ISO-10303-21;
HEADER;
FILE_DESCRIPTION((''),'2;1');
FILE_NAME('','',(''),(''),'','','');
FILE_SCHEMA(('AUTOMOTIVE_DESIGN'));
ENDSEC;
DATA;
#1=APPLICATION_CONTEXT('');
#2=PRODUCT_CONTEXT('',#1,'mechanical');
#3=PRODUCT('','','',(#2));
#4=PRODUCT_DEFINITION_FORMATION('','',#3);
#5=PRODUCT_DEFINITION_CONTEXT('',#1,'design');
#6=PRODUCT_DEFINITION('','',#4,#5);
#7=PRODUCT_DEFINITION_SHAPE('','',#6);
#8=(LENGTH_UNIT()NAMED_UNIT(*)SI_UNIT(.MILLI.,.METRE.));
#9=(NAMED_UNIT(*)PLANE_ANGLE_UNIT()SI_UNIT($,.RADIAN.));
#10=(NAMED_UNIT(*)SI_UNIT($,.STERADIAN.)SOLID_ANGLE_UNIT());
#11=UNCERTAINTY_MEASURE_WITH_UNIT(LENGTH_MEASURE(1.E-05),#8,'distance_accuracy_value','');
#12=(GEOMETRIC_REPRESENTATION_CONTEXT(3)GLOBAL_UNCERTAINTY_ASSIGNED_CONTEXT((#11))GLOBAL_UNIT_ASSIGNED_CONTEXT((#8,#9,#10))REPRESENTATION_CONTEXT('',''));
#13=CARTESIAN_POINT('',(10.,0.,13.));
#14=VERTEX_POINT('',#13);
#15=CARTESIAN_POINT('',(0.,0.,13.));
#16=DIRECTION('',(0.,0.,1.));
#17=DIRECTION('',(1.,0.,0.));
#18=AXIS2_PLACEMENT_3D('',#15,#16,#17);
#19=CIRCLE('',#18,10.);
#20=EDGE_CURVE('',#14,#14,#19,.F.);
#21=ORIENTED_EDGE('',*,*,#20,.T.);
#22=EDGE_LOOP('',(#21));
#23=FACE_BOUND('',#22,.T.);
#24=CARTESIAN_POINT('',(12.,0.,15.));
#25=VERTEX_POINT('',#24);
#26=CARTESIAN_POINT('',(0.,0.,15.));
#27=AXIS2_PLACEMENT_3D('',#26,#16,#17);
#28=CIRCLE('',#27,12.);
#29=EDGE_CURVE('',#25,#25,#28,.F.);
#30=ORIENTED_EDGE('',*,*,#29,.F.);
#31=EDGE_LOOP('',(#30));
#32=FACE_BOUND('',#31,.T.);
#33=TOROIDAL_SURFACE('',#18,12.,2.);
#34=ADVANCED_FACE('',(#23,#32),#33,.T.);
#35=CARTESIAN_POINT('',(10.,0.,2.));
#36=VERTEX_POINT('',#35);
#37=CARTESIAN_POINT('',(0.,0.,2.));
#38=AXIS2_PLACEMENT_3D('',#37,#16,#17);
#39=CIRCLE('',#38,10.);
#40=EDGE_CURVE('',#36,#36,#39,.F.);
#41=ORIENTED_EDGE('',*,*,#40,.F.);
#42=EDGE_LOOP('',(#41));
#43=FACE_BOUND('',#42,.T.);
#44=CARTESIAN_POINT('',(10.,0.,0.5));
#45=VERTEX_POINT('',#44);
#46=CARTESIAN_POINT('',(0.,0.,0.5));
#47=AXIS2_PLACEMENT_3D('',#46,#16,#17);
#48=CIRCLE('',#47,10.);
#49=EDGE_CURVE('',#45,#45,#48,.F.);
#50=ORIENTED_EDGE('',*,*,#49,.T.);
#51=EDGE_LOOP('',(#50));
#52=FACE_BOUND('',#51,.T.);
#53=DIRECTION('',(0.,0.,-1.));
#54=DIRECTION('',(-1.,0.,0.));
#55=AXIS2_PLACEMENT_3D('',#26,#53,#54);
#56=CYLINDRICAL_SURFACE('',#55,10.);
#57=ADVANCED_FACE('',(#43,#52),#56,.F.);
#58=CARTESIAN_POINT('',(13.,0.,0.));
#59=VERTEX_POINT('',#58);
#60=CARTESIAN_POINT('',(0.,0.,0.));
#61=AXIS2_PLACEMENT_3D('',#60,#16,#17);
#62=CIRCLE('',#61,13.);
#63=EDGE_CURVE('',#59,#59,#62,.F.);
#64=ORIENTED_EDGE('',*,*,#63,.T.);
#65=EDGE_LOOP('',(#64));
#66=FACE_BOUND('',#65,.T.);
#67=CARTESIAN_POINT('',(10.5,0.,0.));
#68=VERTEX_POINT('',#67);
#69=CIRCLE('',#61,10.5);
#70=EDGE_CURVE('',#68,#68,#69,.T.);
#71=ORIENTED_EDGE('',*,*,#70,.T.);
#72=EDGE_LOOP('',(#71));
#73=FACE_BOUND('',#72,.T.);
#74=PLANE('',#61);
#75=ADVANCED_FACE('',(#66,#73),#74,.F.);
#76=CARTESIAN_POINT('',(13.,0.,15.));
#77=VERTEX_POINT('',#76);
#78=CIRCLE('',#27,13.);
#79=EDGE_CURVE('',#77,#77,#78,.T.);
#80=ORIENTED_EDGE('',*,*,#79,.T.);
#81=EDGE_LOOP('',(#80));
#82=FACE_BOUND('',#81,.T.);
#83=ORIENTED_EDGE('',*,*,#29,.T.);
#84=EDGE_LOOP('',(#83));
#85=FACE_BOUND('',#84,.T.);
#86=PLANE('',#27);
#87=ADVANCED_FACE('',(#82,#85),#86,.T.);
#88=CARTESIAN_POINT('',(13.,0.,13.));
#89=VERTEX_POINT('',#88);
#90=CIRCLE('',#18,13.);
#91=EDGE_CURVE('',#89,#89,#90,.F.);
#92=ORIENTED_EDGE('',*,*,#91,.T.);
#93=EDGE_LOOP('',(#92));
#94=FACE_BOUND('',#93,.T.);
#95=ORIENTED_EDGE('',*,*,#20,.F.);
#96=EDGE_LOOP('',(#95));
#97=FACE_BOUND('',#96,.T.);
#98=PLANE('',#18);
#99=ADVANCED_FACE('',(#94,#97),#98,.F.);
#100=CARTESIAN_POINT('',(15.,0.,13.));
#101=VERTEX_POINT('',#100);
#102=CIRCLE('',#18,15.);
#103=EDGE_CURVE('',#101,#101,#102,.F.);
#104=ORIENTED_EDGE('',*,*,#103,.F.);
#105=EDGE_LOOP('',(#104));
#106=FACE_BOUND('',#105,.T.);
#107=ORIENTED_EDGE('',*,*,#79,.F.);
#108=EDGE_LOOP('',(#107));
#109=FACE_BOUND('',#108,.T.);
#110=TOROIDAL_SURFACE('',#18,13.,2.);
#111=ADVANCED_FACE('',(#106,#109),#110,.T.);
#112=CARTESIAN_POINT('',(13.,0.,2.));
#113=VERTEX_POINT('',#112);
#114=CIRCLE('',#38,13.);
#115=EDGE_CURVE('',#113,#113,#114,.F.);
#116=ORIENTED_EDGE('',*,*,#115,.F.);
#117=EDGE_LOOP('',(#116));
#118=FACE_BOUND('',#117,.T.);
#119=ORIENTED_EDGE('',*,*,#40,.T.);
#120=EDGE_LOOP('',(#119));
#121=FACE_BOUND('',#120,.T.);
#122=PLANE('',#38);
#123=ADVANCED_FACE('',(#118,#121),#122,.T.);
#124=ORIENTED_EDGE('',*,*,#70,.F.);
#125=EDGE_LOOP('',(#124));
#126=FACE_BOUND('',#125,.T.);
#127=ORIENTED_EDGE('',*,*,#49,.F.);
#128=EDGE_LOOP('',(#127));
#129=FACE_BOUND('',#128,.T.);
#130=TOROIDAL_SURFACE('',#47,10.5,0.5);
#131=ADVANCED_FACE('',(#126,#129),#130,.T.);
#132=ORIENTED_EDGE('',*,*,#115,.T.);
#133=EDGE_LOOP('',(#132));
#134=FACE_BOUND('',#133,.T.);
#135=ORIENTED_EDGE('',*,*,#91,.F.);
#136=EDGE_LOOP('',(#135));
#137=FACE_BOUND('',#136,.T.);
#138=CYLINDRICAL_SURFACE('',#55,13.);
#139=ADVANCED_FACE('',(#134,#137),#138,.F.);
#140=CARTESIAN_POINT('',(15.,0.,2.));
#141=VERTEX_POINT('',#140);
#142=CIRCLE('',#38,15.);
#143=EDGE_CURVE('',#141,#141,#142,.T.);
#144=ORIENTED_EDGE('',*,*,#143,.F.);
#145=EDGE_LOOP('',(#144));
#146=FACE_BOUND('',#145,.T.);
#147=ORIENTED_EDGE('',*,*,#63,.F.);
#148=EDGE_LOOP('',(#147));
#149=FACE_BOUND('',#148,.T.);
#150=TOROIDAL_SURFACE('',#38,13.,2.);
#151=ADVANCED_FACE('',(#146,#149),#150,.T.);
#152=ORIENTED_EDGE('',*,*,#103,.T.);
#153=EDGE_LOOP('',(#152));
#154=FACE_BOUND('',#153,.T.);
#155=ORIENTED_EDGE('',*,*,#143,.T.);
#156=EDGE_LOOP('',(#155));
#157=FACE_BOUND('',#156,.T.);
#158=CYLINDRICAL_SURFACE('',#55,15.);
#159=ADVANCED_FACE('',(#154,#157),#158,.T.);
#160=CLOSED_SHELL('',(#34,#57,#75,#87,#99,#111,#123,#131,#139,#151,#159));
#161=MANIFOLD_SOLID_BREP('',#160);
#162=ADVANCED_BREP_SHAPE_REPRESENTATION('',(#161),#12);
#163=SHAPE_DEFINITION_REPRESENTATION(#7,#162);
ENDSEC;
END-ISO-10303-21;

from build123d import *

# Parameters (mm, degrees)
SKETCH1_R           = 15
SKETCH1_R_2         = 10
EXTRUDE_THIN1_DEPTH = 15
FILLET1_R           = 2
FILLET2_R           = 0.5
SHELL5_START        = 2
SHELL5_OUTLINE_R    = 13
SHELL5_OUTLINE_R_2  = 10
SHELL5_DEPTH        = 11


# Read off the part's stored shape, not the designer's step: Shell5
with BuildPart() as part:
    # Sketch1 → Extrude-Thin1 (new body)
    with BuildSketch(Plane.XY):
        Circle(SKETCH1_R)
        Circle(SKETCH1_R_2, mode=Mode.SUBTRACT)
    extrude(amount=EXTRUDE_THIN1_DEPTH)

    # Fillet1
    fillet1_edges = [part.edges().sort_by_distance(p)[0] for p in [
        (-15, 0, 0),
        (-15, 0, 15),
        (-10, 0, 15),
    ]]
    fillet(fillet1_edges, radius=FILLET1_R)

    # Fillet2
    fillet2_edges = [part.edges().sort_by_distance(p)[0] for p in [
        (-10, 0, 0),
    ]]
    fillet(fillet2_edges, radius=FILLET2_R)

    # Shell5 outline → Shell5 (cut)
    with BuildSketch(Plane.XY.offset(SHELL5_START)):
        Circle(SHELL5_OUTLINE_R)
        Circle(SHELL5_OUTLINE_R_2, mode=Mode.SUBTRACT)
    extrude(amount=SHELL5_DEPTH, mode=Mode.SUBTRACT)


solid = part.part
